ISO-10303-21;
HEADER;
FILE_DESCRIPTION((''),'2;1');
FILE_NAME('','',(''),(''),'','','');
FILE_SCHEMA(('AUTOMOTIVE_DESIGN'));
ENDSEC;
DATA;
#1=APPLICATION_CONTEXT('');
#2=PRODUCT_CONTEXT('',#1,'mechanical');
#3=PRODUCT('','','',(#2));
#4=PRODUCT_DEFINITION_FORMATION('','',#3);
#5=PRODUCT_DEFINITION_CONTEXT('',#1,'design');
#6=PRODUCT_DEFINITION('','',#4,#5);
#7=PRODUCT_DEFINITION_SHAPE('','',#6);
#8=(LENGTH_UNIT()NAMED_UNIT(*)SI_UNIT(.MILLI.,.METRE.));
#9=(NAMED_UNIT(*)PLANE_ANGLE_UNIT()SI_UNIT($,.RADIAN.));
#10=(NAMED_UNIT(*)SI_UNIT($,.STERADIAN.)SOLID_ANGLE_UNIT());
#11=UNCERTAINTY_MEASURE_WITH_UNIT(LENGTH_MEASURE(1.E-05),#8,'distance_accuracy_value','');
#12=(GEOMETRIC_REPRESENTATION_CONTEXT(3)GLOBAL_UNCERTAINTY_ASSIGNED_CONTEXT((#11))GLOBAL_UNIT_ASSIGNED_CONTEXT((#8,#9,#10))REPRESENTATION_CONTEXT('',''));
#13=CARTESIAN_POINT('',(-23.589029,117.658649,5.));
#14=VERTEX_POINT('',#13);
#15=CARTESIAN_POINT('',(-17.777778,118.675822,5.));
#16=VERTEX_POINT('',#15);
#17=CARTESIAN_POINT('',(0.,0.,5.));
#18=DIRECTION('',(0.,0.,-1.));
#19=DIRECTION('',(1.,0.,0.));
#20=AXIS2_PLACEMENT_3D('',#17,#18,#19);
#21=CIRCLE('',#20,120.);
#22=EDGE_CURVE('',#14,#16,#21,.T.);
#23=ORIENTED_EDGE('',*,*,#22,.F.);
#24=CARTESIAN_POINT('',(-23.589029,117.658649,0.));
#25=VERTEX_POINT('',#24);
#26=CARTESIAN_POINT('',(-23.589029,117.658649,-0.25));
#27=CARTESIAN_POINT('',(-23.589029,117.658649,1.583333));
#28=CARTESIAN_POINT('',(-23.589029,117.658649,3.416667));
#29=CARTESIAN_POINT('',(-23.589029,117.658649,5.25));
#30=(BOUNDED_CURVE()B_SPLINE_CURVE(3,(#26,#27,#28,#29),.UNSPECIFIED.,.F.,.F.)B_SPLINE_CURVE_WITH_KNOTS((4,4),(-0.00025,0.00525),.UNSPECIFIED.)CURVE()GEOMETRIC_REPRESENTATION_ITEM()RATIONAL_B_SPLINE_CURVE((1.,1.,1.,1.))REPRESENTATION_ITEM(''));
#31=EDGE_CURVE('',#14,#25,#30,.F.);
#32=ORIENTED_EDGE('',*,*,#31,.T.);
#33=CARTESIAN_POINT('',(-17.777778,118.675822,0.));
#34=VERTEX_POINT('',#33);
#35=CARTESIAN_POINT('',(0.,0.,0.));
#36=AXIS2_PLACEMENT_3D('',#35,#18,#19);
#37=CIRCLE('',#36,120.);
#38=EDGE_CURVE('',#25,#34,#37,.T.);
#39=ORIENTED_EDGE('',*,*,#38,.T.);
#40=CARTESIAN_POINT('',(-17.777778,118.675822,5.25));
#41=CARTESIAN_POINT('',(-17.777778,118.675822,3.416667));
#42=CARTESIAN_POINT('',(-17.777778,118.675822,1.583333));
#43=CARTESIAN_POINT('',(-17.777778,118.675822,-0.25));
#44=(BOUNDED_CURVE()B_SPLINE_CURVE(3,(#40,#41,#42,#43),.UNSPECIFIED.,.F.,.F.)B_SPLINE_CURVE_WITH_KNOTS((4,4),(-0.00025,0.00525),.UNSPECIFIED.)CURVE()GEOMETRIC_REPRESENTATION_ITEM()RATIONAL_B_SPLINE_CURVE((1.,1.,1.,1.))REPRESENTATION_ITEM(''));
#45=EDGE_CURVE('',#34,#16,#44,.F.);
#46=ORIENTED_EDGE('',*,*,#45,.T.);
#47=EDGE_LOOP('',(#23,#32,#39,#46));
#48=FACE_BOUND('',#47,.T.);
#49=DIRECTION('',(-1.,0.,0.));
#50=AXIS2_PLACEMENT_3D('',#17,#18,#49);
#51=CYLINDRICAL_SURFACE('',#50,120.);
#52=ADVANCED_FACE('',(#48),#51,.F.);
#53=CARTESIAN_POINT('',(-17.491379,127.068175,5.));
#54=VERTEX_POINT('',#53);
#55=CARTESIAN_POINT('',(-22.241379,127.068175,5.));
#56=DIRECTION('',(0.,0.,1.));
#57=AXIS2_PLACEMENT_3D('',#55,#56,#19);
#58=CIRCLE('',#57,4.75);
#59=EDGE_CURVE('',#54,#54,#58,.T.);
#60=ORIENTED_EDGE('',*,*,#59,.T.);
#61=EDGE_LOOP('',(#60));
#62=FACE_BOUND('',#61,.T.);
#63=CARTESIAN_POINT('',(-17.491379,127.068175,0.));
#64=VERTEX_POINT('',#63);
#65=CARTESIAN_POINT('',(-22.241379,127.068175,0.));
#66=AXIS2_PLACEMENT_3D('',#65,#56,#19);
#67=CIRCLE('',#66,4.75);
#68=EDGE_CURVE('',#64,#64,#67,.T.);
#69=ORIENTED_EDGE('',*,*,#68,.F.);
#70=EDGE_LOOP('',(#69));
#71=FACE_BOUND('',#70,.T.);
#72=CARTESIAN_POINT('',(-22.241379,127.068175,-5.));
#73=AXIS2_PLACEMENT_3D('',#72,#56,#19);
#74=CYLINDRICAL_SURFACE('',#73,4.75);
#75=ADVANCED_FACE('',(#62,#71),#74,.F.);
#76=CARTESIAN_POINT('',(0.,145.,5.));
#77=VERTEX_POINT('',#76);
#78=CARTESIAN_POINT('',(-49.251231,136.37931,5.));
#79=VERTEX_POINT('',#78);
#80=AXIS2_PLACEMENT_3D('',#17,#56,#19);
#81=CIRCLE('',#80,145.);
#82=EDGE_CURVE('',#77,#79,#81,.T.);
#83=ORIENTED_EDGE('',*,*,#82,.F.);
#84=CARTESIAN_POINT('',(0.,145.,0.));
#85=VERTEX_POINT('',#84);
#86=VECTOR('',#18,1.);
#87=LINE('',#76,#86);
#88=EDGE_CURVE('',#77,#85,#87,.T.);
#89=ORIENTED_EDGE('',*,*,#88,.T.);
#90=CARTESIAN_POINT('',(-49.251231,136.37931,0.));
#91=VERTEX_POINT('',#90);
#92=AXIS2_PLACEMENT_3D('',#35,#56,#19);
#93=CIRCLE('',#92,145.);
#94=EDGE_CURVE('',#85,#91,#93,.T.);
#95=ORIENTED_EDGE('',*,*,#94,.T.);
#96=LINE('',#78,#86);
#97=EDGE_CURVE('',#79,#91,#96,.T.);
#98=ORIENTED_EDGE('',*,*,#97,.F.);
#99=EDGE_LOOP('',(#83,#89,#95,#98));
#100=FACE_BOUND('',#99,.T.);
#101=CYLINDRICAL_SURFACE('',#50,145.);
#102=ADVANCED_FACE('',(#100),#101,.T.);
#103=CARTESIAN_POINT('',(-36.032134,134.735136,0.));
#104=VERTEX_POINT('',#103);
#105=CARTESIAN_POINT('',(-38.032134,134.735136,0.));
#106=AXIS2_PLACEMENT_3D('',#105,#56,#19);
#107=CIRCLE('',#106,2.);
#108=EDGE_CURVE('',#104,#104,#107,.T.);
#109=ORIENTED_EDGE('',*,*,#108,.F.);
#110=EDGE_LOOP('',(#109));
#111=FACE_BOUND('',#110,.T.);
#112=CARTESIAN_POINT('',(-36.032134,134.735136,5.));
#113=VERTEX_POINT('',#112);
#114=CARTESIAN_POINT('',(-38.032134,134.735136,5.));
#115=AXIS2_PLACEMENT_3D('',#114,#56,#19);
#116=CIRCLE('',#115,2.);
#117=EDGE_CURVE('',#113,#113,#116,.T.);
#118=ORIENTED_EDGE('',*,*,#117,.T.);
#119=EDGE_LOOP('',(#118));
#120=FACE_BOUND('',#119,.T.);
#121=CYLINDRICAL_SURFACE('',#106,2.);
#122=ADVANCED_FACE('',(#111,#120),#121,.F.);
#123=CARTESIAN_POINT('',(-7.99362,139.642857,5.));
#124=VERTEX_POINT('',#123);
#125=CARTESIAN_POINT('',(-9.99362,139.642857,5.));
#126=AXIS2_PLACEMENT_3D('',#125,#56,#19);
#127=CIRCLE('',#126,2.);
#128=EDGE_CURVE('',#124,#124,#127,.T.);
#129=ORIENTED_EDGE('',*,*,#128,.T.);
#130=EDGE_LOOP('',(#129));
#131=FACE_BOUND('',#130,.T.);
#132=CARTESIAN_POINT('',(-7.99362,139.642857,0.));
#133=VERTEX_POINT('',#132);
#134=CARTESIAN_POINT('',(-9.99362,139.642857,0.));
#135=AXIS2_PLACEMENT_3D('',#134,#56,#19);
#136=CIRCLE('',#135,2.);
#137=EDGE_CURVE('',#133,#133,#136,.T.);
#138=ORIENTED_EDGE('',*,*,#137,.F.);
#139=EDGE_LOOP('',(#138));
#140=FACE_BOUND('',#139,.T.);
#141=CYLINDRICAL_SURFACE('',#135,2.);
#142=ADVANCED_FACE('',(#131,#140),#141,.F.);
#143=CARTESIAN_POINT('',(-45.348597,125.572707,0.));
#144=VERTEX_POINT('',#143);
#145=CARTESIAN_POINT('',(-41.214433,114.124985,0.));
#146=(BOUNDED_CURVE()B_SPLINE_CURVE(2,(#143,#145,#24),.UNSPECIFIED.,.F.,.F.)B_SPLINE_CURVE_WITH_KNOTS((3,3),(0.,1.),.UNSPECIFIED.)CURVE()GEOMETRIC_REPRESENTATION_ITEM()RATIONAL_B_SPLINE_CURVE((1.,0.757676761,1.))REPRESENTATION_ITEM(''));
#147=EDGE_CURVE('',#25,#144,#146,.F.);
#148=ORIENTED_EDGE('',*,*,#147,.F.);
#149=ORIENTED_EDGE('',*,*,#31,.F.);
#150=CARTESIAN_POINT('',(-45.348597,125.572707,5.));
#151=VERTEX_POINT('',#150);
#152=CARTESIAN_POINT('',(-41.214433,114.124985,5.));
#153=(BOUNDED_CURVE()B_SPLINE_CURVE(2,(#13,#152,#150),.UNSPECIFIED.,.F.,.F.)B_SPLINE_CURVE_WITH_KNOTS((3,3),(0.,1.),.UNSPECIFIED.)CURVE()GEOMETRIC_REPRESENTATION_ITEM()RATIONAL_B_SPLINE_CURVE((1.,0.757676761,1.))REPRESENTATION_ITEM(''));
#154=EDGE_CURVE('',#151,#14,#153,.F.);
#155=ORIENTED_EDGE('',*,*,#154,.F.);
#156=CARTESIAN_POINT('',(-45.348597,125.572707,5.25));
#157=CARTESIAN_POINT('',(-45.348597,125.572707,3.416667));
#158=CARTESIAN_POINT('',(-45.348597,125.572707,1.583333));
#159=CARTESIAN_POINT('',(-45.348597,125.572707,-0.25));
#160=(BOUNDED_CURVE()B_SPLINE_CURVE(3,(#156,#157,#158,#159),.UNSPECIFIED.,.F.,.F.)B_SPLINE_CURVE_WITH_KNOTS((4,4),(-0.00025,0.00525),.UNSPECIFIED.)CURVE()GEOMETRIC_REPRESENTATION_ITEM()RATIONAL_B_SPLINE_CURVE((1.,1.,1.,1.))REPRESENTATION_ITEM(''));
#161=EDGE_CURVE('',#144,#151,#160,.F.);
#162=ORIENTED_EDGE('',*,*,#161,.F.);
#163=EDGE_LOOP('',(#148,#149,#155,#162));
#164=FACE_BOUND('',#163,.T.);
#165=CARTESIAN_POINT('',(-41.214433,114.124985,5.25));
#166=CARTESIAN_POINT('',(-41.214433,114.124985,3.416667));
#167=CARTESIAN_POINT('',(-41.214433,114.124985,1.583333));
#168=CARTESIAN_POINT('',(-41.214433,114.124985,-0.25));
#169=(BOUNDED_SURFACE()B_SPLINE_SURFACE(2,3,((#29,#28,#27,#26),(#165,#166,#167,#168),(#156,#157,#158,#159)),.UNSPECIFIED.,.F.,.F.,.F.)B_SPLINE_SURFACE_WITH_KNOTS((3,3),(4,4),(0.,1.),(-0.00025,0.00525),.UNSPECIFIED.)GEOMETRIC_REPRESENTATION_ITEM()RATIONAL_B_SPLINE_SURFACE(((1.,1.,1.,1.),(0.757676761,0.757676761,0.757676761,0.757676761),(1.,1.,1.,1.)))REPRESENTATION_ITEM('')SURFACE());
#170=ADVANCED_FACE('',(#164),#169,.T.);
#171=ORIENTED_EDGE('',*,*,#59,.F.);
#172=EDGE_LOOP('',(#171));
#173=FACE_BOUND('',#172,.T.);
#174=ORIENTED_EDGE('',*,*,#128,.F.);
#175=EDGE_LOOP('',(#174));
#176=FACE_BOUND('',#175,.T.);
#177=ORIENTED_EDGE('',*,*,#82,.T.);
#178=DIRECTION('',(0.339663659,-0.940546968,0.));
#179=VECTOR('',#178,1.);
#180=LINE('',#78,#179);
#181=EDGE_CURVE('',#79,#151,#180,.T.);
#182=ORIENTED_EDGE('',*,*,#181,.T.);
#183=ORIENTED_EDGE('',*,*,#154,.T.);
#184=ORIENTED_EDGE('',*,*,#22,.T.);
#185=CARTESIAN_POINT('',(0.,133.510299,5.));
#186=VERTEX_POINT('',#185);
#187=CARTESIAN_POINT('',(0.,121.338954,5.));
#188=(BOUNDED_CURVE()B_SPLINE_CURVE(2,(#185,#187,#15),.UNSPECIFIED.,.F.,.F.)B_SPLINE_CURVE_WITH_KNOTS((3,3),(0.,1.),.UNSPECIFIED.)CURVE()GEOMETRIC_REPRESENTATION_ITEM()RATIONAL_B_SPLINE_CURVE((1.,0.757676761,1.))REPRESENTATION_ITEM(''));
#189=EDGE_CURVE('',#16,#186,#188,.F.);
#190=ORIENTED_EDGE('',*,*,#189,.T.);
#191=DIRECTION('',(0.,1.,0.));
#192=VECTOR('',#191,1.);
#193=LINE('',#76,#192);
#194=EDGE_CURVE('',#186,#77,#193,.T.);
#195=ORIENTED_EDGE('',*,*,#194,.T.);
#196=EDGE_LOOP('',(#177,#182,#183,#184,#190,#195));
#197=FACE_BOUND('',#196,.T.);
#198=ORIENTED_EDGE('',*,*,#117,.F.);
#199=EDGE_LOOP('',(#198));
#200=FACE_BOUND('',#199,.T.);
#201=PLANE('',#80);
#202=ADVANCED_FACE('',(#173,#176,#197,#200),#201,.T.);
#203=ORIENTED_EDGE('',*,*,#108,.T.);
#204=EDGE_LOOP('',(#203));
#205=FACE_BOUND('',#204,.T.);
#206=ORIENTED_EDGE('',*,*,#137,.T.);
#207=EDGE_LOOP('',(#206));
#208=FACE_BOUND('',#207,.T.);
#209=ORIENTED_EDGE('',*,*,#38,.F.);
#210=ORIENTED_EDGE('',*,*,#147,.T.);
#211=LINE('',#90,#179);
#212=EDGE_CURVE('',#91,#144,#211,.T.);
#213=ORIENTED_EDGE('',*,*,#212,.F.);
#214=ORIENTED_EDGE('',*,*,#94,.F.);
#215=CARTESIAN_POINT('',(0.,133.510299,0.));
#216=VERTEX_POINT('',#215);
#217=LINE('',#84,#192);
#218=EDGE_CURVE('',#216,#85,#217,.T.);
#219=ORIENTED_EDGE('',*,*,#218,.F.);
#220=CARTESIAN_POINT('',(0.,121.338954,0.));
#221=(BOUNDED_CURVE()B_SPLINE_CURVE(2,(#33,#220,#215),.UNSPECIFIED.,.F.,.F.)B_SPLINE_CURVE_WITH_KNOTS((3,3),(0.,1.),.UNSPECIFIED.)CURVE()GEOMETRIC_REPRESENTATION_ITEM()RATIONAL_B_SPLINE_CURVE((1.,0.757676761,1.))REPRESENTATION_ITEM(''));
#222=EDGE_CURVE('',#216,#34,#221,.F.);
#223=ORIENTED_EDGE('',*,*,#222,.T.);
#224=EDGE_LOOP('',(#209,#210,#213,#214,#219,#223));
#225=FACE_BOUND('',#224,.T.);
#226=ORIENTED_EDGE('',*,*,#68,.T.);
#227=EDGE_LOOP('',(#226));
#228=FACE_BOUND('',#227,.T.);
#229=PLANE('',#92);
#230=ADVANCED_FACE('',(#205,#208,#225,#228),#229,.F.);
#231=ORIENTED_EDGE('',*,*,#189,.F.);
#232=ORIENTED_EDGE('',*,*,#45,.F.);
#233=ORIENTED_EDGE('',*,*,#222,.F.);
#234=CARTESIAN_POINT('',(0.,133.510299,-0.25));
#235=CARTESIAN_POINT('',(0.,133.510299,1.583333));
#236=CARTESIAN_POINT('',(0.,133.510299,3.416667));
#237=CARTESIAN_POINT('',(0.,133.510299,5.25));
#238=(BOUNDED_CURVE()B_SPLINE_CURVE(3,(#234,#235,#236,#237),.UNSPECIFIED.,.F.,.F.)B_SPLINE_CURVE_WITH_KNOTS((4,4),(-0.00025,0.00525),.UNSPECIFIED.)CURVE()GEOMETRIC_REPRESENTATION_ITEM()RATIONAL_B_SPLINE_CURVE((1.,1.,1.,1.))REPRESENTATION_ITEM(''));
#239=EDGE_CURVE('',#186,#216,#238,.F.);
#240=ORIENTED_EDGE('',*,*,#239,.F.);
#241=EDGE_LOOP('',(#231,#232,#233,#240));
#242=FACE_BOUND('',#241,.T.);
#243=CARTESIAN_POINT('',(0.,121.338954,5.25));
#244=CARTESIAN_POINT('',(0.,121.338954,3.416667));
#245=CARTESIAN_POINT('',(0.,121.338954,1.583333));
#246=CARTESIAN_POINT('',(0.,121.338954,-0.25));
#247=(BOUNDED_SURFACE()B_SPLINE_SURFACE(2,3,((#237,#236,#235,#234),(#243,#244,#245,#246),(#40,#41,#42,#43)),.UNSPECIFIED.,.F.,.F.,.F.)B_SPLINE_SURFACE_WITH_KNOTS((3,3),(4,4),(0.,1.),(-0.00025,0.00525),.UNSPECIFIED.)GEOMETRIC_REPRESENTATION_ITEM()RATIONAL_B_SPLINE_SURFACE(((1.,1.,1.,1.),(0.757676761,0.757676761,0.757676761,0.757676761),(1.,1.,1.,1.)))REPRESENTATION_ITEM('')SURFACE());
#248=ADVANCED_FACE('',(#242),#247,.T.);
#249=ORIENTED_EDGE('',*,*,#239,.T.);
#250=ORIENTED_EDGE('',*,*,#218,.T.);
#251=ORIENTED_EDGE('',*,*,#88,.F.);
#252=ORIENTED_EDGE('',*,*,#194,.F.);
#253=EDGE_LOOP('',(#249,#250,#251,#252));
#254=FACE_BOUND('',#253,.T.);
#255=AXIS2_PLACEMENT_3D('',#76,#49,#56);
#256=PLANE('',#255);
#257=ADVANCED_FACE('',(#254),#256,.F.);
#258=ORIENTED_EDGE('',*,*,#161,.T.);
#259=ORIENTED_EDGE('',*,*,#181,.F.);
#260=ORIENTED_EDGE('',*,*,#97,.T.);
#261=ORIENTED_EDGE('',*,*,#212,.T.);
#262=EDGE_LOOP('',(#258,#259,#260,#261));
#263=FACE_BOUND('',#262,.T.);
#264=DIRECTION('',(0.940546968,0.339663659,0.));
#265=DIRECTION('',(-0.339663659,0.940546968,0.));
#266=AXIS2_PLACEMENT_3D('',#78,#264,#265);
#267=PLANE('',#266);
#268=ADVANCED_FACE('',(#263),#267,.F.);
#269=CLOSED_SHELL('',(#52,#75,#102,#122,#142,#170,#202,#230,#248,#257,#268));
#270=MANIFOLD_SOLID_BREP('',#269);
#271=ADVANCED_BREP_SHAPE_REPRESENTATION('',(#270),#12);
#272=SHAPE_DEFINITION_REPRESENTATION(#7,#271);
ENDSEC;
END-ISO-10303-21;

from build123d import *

# Parameters (mm, degrees)
ESTRUSIONE_ESTRUSIONE1_DEPTH = 5
SCHIZZO2_R                   = 2
TAGLIO_ESTRUSIONE1_DEPTH     = 5
SCHIZZO4_R                   = 4.75
TAGLIO_ESTRUSIONE2_DEPTH     = 10


with BuildPart() as part:
    # Schizzo1 → Estrusione-Estrusione1 (new body)
    with BuildSketch(Plane.XY):
        with BuildLine():
            Line((0, 145), (0, 120))
            ThreePointArc((0, 120), (-20.689655172, 118.2029533), (-40.759639069, 112.865636147))
            Line((-40.759639069, 112.865636147), (-49.251230542, 136.379310345))
            ThreePointArc((-49.251230542, 136.379310345), (-25, 142.828568571), (0, 145))
        make_face()
    extrude(amount=ESTRUSIONE_ESTRUSIONE1_DEPTH)

    # Schizzo2 → Taglio-Estrusione1 (cut)
    with BuildSketch(Plane.XY.offset(5)):
        with Locations((-38.032134419, 134.73513555)):
            Circle(SCHIZZO2_R)
        with Locations((-9.993620414, 139.642857143)):
            Circle(SCHIZZO2_R)
    extrude(amount=-TAGLIO_ESTRUSIONE1_DEPTH, mode=Mode.SUBTRACT)

    # Raccordo1
    # an asymmetric fillet: 20, 15 mm, written as the material it takes off along each edge
    with BuildSketch(Plane(origin=(-40.759639069, 112.865636147, -44.567563269), x_dir=(-0.3396636589081028, 0.9405469678953624, 0), z_dir=(0, 0, 1))) as raccordo1_piece_1:
        with BuildLine():
            Bezier((13.510299228, 0), (1.338953576, 0), (-1.324178464, -17.777777778), weights=[1, 0.757676761, 1])
            ThreePointArc((-1.324178464, -17.777777778), (-0.331502507, -8.913512654), (0, 0))
            Line((0, 0), (13.510299228, 0))
        make_face()
    extrude(amount=94.135126538, mode=Mode.SUBTRACT)

    # Raccordo2
    # an asymmetric fillet: 20, 15 mm, written as the material it takes off along each edge
    with BuildSketch(Plane(origin=(0, 120, -44.567563269), x_dir=(-0.9972374791061684, -0.07427927211527091, 0), z_dir=(0, 0, 1))) as raccordo2_piece_1:
        with BuildLine():
            Bezier((17.827025308, 0), (-0.099456497, -1.335254689), (-1.003535193, -13.472976744), weights=[1, 0.757676761, 1])
            Line((-1.003535193, -13.472976744), (0, 0))
            ThreePointArc((0, 0), (8.913512654, -0.331502507), (17.827025308, 0))
        make_face()
    extrude(amount=94.135126538, mode=Mode.SUBTRACT)

    # Schizzo4 → Taglio-Estrusione2 (cut)
    with BuildSketch(Plane.XY.offset(5)):
        with Locations((-22.24137931, 127.068174798)):
            Circle(SCHIZZO4_R)
    extrude(amount=-TAGLIO_ESTRUSIONE2_DEPTH, mode=Mode.SUBTRACT)


solid = part.part
